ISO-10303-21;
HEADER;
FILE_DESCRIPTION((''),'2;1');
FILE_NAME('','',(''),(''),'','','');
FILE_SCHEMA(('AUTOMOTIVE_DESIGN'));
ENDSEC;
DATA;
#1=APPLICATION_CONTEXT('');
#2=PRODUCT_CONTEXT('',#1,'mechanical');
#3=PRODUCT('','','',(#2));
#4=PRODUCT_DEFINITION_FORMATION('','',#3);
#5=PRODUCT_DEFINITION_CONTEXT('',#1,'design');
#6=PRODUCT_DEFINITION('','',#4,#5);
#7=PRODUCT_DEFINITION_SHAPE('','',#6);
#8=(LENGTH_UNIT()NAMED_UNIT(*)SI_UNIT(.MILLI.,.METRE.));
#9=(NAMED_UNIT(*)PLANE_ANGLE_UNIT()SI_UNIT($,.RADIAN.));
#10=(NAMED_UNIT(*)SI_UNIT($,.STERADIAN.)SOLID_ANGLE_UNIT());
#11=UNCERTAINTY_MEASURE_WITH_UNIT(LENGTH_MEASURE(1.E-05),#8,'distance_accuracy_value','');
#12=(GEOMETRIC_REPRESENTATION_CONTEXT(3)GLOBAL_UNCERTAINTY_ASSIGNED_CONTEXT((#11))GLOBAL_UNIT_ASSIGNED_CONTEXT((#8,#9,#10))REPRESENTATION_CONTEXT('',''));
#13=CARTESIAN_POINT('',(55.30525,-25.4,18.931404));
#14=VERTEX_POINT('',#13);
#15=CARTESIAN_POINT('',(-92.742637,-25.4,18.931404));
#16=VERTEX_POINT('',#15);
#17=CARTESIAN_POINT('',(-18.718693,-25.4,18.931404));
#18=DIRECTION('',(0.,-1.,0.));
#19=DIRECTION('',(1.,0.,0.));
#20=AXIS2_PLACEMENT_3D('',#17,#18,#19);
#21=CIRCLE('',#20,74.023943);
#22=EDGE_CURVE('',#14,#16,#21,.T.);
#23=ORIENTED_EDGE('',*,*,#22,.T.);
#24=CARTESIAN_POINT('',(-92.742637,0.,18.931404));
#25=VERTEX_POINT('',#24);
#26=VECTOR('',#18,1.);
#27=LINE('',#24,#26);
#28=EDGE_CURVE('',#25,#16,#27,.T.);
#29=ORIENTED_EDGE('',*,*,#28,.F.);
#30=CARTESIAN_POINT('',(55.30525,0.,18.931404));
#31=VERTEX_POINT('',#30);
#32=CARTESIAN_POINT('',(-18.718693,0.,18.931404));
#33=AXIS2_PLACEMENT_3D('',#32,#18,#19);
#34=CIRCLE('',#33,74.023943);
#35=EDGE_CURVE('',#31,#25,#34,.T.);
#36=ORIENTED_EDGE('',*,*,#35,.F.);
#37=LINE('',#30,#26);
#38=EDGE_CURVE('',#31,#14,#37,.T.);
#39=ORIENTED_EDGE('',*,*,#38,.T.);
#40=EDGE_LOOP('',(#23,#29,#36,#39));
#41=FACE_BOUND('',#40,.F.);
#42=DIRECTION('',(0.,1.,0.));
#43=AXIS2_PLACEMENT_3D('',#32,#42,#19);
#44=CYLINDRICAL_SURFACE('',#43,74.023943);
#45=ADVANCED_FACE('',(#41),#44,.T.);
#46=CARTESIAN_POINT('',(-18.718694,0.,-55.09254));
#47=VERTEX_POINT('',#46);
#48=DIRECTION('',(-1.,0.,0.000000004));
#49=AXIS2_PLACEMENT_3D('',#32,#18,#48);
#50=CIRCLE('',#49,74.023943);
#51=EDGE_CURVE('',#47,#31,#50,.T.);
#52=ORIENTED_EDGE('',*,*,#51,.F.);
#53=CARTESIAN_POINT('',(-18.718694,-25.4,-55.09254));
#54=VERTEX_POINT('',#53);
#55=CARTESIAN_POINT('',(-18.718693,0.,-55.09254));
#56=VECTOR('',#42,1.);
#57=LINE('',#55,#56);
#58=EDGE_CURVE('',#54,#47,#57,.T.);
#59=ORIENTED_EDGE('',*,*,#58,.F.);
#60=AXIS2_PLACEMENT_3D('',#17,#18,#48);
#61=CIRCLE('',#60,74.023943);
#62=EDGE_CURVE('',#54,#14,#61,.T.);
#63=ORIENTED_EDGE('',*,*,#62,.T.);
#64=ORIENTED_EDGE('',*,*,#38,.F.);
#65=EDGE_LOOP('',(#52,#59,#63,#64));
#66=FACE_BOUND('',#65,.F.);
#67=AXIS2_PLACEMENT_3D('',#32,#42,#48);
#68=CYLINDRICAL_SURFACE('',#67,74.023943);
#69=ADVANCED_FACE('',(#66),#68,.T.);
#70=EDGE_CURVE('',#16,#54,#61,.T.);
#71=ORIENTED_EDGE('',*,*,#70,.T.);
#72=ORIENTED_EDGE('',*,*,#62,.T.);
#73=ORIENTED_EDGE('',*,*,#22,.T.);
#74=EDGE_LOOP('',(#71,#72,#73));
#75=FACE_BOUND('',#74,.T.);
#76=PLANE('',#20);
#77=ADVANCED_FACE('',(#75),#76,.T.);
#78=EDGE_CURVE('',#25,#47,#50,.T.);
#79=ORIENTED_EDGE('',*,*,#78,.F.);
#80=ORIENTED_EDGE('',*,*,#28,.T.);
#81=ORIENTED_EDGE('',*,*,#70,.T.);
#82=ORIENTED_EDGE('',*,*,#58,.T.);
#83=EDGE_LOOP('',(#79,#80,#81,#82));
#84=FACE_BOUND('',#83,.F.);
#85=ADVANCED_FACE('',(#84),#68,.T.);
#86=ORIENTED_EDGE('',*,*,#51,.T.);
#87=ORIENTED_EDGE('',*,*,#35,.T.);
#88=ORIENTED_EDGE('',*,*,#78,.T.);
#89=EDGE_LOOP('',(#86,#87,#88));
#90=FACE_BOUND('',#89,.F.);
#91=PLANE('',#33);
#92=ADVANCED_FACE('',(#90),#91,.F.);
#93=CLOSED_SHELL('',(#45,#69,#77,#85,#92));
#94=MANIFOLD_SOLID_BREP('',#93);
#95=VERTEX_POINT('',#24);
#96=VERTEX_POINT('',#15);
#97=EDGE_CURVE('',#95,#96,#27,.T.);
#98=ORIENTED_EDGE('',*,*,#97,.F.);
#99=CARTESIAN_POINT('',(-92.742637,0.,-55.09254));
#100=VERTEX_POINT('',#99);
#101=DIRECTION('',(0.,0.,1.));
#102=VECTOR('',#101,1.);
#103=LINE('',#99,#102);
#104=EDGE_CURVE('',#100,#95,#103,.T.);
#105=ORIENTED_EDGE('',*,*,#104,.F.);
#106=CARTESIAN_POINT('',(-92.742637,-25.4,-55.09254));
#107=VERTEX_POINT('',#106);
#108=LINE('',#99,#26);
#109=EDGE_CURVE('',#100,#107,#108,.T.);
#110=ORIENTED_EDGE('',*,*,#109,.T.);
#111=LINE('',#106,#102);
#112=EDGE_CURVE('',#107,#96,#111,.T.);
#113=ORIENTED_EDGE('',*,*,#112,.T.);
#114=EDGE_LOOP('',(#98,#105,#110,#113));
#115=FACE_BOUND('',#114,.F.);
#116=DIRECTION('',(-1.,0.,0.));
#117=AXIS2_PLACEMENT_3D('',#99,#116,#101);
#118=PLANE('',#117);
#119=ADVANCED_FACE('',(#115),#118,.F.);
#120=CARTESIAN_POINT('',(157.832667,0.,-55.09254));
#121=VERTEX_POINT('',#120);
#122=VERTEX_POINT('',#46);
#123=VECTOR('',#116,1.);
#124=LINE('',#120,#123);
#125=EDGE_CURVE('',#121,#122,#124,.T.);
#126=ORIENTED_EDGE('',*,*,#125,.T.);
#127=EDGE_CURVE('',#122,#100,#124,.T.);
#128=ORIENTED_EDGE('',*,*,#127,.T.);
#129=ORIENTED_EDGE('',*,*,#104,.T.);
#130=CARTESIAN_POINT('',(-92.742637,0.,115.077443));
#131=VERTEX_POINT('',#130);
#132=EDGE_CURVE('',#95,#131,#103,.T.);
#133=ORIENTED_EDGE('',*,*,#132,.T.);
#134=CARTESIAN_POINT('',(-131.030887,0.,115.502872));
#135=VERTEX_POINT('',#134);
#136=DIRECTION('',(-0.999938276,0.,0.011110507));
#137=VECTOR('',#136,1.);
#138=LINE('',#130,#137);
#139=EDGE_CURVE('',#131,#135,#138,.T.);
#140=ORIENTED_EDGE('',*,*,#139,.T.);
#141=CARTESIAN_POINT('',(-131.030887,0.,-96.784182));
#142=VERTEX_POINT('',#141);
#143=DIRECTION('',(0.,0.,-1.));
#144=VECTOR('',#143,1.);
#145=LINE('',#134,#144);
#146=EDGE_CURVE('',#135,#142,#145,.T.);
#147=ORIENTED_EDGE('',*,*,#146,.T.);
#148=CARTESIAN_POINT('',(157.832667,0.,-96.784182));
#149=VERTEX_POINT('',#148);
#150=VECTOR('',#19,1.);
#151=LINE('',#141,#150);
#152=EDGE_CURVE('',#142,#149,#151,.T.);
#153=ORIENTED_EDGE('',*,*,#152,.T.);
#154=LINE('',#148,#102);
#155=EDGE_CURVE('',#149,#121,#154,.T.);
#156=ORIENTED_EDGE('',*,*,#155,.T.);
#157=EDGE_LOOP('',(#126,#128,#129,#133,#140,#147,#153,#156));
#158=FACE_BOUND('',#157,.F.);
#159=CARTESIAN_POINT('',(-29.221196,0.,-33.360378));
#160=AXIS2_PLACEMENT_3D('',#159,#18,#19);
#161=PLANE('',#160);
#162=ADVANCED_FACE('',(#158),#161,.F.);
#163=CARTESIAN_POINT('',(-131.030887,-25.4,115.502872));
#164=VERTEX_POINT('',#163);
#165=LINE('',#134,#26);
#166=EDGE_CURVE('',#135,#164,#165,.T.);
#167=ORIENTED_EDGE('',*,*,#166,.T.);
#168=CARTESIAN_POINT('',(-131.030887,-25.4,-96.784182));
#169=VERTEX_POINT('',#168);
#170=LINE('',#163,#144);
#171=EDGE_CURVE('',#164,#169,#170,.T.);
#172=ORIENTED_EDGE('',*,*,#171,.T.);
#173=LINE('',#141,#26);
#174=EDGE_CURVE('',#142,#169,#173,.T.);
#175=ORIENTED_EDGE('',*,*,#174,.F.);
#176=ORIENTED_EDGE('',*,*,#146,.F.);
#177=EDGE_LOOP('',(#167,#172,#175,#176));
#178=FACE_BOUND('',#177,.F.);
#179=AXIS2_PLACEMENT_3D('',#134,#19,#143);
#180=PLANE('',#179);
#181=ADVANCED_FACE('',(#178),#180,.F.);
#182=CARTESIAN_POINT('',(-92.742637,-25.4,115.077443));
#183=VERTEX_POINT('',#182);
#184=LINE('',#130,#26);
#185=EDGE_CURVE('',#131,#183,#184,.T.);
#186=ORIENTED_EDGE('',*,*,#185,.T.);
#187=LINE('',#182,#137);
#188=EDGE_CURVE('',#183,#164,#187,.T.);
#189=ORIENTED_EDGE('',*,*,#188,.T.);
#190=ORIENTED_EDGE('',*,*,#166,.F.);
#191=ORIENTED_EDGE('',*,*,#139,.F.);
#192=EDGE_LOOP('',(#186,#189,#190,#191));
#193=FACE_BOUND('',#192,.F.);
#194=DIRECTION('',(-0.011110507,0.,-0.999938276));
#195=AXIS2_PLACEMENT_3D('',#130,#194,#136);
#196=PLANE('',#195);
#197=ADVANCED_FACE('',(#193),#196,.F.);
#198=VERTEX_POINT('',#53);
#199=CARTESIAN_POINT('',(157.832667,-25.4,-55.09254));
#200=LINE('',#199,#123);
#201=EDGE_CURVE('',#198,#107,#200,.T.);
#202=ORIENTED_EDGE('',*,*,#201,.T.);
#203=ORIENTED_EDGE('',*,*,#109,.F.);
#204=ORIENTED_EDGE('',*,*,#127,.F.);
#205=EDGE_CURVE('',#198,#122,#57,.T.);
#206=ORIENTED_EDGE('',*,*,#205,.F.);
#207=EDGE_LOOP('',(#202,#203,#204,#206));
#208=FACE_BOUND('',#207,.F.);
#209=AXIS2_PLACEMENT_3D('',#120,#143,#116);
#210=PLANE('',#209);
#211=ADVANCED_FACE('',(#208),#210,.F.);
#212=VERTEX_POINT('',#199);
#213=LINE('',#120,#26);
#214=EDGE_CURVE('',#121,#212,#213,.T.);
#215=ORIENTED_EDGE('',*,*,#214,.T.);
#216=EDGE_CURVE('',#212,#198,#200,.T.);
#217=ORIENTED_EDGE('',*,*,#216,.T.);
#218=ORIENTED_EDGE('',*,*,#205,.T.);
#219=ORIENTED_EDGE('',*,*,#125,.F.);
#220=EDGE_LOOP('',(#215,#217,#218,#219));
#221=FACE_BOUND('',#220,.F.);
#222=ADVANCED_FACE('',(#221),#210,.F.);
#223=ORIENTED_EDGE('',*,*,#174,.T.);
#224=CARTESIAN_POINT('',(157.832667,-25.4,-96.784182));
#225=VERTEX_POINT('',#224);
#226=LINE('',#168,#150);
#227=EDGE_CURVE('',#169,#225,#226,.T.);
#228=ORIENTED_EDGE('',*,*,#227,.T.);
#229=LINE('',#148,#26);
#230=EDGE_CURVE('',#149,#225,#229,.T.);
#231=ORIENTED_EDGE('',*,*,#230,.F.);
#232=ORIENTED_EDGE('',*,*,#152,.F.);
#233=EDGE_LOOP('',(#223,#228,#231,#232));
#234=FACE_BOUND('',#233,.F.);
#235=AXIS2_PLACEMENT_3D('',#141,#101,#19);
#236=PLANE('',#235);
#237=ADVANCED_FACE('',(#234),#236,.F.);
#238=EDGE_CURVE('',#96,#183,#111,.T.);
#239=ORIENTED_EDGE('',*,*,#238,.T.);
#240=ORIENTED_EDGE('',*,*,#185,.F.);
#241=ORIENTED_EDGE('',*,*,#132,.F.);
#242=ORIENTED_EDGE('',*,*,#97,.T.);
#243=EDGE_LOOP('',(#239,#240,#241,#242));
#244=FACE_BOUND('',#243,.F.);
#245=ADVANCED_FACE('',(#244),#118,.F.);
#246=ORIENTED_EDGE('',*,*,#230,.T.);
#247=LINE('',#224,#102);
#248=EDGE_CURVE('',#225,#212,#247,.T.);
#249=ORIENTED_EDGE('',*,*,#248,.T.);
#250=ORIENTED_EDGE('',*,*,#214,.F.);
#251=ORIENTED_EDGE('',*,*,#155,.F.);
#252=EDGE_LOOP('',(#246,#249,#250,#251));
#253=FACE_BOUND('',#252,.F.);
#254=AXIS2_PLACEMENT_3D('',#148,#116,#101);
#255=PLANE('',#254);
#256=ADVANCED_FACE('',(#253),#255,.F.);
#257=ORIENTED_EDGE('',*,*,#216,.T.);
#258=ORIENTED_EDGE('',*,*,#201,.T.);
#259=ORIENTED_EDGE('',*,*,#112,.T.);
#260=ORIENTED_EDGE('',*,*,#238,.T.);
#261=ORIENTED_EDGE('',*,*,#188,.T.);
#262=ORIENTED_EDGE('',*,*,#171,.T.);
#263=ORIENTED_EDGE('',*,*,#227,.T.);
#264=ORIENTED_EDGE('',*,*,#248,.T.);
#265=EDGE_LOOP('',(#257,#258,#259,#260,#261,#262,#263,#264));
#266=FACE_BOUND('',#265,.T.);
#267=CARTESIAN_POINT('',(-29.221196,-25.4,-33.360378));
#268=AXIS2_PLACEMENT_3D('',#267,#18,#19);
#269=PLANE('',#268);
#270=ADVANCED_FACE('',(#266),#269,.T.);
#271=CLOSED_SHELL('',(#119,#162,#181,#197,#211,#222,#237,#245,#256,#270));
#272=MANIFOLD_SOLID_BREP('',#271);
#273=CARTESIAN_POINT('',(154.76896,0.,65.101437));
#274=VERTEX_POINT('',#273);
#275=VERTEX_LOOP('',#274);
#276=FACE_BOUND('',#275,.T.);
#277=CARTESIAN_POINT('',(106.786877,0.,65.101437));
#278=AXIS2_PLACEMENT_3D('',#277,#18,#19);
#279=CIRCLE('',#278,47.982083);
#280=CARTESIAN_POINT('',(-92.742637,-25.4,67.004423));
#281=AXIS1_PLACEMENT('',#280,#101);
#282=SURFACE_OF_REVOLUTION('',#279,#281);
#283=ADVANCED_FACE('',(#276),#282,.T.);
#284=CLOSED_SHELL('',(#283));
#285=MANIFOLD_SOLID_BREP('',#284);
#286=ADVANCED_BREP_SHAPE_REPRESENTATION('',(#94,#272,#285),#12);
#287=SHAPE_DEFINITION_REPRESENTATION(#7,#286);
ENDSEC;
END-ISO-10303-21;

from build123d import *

# Parameters (mm, degrees)
F1_DEPTH = 25.4
F3_DEPTH = 25.4
F2_R     = 47.9820834299


# Not quite as in the source:
# - the program builds the solid bodies; features that only make, move or delete a surface that nothing else refers to are left out


with BuildPart() as f1:
    # F0 (on Front) → F1 (new body)
    with BuildSketch(Plane.XZ):
        Polygon((-92.7426367998, 115.0774434209), (-131.0308873653, 115.502871573), (-131.0308873653, -96.7841818929), (157.8326672316, -96.7841818929), (157.8326672316, -55.0925396383), (-92.7426367998, -55.0925396383), align=None)
    extrude(amount=F1_DEPTH)

    # F2 (on Front) → F3 (join)
    with BuildSketch(Plane.XZ):
        with BuildLine():
            ThreePointArc((-92.7426367998, 18.9314040204), (-71.0615257881, -33.4114285499), (-18.7186932496, -55.0925396383))
            ThreePointArc((-18.7186932496, -55.0925396383), (33.6241389941, -33.4114285331), (55.305249989, 18.9314037561))
            ThreePointArc((55.305249989, 18.9314037561), (-18.7186932733, 92.9553471506), (-92.7426367998, 18.9314040204))
        make_face()
    extrude(amount=F3_DEPTH)


with BuildPart() as f5:
    # F2 (on Front) → F5 (revolve)
    with BuildSketch(Plane.XZ):
        with Locations((106.7868769169, 65.1014372706)):
            Circle(F2_R)
    revolve(axis=Axis((-92.7426367998, -25.4, 67.0044234123), (0, 0, 1)))


solid = Compound([f1.part, f5.part])
